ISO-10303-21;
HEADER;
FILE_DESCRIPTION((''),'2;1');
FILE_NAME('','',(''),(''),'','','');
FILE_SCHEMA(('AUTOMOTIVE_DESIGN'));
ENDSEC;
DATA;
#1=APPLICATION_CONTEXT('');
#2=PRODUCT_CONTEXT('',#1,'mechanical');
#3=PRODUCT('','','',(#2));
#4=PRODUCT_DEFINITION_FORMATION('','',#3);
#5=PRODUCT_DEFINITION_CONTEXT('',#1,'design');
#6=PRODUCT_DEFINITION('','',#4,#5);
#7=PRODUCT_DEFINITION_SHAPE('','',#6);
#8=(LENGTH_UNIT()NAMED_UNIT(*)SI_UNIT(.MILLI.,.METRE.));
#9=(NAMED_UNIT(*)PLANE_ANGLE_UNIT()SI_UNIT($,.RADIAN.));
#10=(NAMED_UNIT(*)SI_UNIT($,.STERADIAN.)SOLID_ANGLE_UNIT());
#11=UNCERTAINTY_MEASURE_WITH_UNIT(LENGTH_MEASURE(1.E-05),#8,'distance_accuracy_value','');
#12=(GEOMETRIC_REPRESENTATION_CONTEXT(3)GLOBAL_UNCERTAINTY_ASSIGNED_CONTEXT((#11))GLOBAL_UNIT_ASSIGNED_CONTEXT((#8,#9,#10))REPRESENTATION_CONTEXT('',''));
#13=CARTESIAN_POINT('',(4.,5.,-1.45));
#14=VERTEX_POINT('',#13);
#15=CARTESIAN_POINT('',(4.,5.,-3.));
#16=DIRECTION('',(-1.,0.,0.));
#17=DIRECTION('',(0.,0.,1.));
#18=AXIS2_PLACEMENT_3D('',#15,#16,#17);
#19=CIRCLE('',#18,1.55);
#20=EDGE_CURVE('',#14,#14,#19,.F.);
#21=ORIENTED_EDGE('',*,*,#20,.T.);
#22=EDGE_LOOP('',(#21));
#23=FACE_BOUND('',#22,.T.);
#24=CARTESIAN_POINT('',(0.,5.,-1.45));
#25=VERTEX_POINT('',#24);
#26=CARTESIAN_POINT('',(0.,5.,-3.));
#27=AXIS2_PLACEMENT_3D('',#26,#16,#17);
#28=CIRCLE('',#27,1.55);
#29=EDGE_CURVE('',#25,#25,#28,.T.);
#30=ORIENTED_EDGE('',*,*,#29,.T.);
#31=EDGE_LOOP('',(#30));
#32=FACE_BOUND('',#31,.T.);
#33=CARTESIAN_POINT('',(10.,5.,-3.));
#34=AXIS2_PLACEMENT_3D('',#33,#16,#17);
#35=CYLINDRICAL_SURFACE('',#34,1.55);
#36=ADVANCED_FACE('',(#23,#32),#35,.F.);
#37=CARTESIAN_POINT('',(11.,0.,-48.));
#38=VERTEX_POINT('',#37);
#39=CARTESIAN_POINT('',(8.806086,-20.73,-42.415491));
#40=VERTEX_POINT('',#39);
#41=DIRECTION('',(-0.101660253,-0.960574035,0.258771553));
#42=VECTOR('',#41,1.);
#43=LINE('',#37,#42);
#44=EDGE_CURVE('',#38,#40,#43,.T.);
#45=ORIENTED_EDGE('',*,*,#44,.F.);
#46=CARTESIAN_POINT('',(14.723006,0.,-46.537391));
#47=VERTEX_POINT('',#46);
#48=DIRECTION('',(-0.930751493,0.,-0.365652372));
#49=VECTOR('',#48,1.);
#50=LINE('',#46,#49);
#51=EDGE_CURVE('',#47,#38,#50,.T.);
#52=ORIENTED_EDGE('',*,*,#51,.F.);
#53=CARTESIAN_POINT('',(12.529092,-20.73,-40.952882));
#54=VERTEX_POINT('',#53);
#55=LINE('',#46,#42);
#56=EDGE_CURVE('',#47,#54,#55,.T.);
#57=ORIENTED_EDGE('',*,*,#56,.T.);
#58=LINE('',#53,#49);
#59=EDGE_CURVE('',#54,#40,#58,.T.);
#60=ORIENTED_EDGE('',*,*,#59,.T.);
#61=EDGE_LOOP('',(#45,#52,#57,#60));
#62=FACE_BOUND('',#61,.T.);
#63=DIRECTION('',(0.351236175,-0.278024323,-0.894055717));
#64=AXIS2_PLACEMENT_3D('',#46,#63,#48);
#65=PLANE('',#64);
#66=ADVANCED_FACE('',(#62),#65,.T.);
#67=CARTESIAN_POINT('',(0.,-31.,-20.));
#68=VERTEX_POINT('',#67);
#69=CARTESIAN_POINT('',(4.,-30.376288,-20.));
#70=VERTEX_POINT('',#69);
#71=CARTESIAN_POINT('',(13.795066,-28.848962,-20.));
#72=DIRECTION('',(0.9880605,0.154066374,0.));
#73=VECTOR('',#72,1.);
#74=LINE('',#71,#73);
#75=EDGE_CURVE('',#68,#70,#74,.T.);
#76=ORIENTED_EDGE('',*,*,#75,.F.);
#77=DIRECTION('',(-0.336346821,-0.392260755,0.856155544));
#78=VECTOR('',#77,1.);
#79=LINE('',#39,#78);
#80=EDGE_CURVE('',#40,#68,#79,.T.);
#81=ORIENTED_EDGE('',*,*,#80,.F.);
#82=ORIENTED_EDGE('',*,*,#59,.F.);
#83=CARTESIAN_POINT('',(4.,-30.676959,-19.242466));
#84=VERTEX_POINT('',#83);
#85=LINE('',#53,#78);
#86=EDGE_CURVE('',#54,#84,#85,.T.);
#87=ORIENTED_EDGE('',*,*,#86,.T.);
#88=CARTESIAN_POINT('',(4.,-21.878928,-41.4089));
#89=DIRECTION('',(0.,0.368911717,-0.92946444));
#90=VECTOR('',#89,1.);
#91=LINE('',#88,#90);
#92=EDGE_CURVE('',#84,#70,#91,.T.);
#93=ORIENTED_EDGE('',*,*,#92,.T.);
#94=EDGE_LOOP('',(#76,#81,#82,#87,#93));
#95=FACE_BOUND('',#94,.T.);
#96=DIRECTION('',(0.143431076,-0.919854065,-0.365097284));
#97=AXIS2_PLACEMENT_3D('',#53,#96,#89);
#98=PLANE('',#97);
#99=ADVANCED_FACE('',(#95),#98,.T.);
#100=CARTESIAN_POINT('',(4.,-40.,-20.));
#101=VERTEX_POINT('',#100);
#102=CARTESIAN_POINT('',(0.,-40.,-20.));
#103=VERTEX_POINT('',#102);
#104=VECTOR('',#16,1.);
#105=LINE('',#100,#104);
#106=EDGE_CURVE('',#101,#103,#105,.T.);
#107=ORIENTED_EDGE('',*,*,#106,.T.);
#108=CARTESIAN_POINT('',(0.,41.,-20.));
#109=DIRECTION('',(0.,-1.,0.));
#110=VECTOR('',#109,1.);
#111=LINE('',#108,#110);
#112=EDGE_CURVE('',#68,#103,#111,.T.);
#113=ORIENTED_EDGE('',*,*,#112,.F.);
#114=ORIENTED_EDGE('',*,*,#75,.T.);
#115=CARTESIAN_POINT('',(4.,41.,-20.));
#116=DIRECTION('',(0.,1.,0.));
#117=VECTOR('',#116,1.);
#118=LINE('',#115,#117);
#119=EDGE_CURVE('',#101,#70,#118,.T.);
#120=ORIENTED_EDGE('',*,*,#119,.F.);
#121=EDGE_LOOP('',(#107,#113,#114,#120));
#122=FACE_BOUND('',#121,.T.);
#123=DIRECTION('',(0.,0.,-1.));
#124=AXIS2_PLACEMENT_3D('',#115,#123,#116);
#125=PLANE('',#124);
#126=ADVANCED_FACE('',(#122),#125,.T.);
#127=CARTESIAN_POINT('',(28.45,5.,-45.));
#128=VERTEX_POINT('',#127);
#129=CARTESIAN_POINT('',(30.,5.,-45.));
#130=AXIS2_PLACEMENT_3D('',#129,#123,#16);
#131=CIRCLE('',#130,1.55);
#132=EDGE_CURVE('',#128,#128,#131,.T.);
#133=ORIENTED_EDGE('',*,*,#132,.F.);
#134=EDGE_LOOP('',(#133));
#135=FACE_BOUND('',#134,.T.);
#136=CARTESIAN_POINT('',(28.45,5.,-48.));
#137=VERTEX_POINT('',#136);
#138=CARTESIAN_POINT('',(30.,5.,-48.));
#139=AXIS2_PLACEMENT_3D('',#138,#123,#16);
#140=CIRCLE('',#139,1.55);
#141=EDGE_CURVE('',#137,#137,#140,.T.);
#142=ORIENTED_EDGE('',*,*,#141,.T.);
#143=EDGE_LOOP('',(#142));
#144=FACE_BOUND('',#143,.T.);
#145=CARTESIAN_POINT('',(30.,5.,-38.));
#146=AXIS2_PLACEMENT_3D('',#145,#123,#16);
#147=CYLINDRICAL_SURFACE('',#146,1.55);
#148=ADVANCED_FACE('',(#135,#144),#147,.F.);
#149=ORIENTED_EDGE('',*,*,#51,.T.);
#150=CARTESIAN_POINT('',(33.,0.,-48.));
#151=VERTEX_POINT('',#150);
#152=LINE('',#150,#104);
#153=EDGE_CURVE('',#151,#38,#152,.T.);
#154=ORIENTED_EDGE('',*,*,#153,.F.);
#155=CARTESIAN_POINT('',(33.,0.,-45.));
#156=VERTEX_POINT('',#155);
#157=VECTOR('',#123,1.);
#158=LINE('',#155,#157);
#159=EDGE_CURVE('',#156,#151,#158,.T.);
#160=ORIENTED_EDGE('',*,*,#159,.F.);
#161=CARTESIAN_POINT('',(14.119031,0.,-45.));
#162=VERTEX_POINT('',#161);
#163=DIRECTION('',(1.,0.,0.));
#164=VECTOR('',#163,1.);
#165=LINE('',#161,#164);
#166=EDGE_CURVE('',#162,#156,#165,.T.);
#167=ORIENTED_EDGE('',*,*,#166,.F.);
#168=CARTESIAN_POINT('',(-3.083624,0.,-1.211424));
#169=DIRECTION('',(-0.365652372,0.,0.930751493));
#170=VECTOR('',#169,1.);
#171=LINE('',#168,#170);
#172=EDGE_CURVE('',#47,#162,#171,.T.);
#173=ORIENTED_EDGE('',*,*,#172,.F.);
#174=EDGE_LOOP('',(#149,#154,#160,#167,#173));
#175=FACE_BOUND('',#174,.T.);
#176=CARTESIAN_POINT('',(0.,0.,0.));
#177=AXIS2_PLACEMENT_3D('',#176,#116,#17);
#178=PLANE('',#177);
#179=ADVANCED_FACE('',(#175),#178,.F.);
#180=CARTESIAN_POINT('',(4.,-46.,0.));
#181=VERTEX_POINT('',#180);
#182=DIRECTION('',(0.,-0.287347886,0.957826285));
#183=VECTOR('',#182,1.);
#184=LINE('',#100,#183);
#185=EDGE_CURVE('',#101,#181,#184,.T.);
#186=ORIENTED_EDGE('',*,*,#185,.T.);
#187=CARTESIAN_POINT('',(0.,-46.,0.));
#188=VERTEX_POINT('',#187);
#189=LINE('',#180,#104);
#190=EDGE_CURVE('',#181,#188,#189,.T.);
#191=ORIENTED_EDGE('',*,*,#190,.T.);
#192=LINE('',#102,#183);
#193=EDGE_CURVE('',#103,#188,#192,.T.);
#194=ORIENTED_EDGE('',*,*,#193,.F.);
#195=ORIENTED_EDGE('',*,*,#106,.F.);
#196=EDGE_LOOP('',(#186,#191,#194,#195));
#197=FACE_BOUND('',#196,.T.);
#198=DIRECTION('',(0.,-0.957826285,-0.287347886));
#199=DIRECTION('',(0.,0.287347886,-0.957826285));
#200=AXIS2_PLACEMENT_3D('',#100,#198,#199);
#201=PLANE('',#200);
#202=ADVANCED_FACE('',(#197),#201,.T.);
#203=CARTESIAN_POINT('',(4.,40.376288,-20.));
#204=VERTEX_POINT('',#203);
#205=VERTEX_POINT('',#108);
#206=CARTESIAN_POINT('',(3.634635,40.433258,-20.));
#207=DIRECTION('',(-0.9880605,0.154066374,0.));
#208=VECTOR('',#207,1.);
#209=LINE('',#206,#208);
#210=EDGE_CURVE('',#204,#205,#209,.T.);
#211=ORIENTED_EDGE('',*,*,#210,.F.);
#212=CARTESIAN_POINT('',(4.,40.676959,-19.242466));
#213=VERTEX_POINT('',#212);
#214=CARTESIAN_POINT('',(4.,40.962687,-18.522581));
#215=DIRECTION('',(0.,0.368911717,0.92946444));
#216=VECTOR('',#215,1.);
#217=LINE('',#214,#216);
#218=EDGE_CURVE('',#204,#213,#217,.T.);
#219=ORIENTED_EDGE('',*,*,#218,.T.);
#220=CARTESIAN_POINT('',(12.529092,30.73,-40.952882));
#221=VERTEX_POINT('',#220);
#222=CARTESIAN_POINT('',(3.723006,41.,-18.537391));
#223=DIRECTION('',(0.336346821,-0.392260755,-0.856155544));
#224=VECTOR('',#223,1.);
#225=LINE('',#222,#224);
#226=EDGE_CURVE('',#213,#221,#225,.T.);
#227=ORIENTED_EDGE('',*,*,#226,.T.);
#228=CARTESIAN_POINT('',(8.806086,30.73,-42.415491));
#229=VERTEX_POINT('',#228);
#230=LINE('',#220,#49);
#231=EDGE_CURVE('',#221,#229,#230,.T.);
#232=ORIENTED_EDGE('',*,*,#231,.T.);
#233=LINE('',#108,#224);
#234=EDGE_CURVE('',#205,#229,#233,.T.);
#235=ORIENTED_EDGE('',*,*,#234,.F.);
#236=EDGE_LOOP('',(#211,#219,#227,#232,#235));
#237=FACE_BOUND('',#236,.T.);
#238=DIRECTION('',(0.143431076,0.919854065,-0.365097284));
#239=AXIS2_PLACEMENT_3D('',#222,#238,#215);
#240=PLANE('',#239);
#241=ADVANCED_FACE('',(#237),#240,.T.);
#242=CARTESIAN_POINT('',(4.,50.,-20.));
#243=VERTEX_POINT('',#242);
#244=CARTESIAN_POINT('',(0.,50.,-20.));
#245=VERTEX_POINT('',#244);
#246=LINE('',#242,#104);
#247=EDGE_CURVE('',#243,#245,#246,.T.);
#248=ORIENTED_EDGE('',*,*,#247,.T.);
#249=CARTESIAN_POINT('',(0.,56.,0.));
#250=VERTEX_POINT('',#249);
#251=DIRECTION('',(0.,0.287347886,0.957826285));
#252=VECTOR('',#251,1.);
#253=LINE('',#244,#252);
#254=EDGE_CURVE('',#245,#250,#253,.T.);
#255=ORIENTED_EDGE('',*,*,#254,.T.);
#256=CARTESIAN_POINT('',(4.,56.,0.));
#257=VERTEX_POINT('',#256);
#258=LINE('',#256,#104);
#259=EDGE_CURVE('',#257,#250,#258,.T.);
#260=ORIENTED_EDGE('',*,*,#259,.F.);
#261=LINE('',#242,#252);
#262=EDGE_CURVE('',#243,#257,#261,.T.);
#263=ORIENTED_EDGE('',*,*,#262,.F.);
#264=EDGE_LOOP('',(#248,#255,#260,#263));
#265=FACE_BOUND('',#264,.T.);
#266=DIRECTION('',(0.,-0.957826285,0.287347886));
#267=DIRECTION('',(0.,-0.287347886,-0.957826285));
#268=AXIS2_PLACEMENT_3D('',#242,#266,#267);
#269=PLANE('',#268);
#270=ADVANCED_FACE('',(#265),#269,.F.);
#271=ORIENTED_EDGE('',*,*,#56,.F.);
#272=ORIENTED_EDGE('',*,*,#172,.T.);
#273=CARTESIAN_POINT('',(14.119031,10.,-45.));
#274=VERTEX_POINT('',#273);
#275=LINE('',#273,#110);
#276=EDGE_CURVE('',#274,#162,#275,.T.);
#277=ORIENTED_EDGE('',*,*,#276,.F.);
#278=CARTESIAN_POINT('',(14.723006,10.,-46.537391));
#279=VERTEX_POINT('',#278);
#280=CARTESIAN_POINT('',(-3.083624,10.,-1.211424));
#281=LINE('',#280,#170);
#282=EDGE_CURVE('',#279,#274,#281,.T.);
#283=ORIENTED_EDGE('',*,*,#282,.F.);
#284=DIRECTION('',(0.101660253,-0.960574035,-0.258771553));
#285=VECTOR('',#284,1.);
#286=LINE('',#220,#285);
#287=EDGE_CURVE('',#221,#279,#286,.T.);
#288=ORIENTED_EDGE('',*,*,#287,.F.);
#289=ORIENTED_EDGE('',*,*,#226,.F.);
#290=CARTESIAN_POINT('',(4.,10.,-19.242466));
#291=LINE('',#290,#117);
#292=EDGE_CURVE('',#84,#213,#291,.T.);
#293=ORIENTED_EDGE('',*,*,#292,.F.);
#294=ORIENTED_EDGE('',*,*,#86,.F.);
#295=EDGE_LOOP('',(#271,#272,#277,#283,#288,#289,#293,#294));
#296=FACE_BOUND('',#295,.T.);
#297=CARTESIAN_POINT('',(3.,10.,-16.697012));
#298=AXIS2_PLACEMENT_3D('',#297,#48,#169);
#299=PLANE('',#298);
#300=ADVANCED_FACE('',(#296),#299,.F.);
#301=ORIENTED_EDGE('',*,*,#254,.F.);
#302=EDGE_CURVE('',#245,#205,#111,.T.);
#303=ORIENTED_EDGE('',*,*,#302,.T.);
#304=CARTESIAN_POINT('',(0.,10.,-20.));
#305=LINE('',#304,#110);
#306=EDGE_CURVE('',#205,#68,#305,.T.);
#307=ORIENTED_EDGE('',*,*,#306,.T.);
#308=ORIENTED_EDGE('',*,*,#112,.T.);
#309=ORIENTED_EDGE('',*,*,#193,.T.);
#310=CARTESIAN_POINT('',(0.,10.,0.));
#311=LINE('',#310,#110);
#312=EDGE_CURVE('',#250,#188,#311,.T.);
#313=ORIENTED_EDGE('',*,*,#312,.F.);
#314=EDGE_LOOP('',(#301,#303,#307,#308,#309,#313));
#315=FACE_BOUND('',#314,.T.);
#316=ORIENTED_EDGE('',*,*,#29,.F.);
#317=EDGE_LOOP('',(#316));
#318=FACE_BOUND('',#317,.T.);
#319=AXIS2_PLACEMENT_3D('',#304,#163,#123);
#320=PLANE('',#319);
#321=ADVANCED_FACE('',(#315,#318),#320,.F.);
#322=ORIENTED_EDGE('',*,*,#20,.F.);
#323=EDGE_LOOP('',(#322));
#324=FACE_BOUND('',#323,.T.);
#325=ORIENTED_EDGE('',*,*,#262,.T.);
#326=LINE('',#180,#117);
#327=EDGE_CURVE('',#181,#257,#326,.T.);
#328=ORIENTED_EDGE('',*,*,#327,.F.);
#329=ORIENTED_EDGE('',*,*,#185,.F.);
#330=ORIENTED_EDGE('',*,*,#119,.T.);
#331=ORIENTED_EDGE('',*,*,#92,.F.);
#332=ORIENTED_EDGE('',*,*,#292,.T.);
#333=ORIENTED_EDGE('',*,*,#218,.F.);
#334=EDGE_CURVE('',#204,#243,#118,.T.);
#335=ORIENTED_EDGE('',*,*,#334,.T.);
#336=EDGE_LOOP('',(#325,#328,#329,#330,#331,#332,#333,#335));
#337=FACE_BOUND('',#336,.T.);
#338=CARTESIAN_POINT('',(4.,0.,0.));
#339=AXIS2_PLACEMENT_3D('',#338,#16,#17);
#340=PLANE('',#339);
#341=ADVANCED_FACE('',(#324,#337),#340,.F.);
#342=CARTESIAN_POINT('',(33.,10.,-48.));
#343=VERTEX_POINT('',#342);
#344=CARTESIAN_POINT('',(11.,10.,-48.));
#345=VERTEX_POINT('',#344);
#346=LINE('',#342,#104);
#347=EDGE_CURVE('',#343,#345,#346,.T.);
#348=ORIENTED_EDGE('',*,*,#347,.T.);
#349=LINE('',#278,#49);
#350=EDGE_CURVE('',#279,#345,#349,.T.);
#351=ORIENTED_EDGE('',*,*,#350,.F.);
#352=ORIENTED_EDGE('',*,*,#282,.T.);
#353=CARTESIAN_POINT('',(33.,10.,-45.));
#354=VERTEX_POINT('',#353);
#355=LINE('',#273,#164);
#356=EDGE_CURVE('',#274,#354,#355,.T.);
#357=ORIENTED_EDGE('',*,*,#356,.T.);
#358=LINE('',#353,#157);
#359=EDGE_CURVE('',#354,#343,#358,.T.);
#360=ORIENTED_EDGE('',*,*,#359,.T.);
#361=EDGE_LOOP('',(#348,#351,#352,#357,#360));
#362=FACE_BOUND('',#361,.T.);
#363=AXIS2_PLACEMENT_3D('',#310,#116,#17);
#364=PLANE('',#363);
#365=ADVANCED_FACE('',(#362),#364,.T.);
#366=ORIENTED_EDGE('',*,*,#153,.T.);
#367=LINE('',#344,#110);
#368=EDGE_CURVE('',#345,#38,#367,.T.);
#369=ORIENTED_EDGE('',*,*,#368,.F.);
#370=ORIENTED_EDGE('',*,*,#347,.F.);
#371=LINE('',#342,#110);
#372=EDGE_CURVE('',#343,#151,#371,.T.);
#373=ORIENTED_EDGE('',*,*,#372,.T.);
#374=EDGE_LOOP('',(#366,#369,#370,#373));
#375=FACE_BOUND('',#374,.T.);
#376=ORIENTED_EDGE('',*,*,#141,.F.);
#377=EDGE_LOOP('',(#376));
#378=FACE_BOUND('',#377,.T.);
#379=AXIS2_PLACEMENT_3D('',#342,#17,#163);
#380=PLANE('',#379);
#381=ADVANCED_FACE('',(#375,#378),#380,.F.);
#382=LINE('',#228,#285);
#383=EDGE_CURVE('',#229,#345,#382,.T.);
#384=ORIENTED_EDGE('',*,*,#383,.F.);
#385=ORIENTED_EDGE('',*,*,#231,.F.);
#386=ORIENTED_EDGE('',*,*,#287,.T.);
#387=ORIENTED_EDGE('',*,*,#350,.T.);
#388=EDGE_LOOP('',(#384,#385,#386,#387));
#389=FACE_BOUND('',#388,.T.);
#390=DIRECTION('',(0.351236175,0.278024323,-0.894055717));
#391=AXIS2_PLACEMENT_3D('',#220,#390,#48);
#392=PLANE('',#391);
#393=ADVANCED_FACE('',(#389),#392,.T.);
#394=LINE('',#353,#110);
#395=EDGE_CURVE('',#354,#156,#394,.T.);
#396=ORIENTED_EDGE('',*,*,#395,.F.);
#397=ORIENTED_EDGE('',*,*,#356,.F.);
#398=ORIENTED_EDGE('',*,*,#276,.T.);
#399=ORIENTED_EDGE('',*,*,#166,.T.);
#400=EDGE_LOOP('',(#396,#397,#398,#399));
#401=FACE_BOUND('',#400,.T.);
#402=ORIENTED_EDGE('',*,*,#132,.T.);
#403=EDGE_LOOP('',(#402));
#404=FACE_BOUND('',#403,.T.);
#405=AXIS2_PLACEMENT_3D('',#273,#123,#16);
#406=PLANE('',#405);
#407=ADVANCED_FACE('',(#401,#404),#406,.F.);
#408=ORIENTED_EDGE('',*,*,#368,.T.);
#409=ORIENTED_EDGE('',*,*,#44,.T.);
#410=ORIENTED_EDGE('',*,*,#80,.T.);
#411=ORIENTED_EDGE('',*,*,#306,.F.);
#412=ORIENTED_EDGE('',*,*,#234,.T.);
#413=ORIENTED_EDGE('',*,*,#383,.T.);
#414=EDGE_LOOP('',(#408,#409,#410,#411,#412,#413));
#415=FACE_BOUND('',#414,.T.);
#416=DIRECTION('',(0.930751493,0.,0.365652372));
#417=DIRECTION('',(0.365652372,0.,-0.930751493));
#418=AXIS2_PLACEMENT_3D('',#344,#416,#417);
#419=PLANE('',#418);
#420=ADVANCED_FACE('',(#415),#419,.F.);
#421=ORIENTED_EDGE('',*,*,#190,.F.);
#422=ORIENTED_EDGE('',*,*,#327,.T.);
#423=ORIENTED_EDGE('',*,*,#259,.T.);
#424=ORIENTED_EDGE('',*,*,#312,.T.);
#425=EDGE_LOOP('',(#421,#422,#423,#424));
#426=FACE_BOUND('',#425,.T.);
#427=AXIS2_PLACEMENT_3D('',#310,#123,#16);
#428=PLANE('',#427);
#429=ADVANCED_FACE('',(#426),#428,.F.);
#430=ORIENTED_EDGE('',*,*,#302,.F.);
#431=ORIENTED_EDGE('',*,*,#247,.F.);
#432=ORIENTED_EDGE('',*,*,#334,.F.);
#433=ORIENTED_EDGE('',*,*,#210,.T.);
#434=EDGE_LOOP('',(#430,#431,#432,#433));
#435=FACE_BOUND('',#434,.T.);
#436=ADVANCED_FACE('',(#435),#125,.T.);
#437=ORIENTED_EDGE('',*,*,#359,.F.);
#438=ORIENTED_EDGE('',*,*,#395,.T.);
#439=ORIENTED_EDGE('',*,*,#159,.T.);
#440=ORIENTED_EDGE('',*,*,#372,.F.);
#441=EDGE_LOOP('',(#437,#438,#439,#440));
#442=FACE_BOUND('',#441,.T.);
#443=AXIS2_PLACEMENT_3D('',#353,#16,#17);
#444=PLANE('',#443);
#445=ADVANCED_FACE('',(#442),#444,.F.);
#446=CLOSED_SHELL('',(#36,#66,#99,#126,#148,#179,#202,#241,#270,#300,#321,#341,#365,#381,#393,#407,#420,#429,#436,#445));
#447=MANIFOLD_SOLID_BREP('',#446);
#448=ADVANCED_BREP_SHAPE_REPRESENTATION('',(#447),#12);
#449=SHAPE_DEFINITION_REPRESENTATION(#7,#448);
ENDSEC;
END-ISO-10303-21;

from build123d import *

# Parameters (mm, degrees)
EXTRUDE_1_DEPTH     = 10
SKETCH_2_R          = 1.55
CUT_EXTRUDE_3_DEPTH = 10
CUT_EXTRUDE_4_DEPTH = 10
EXTRUDE_2_DEPTH     = 4
SKETCH_5_R          = 1.55
EXTRUDE_4_DEPTH     = 4


with BuildPart() as part:
    # 草图1 → 凸台-拉伸1 (new body)
    with BuildSketch(Plane(origin=(0, 0, 0), x_dir=(1, 0, 0), z_dir=(0, 1, 0))):
        Polygon((0, 0), (3, 0), (3, 16.697011668), (14.11903113, 45), (33, 45), (33, 48), (11, 48), (0, 20), align=None)
    extrude(amount=EXTRUDE_1_DEPTH)

    # 草图2 → 切除-拉伸3 (cut)
    with BuildSketch(Plane.ZY):
        with Locations((-3, 5)):
            Circle(SKETCH_2_R)
    extrude(amount=-CUT_EXTRUDE_3_DEPTH, mode=Mode.SUBTRACT)

    # 草图3 → 切除-拉伸4 (cut)
    with BuildSketch(Plane(origin=(0, 0, -48), x_dir=(-1, 0, 0), z_dir=(0, 0, -1))):
        with BuildLine():
            ThreePointArc((-31.55, 5), (-30, 3.45), (-28.45, 5))
            ThreePointArc((-28.45, 5), (-30, 6.55), (-31.55, 5))
        make_face()
    extrude(amount=-CUT_EXTRUDE_4_DEPTH, mode=Mode.SUBTRACT)

    # 草图4 → 凸台-拉伸2 (add)
    with BuildSketch(Plane(origin=(-6.806629834, 0, -2.674033149), x_dir=(-0.36565237242299337, 0, 0.9307514934403471), z_dir=(-0.9307514934403471, 0, -0.36565237242299337))):
        Polygon((-18.615029869, 10), (-18.615029869, 41), (-42.698247782, 30.73), (-48.698247782, 10), (-48.698247782, 0), (-42.698247782, -20.73), (-18.615029869, -31), align=None)
    extrude(amount=-EXTRUDE_2_DEPTH)

    # 草图5 → 凸台-拉伸4 (add)
    with BuildSketch(Plane.ZY):
        Polygon((-20, 41), (-20, -31), (-20, -40), (0, -46), (0, 56), (-20, 50), align=None)
        with Locations((-3, 5)):
            Circle(SKETCH_5_R, mode=Mode.SUBTRACT)
    extrude(amount=-EXTRUDE_4_DEPTH)


solid = part.part
